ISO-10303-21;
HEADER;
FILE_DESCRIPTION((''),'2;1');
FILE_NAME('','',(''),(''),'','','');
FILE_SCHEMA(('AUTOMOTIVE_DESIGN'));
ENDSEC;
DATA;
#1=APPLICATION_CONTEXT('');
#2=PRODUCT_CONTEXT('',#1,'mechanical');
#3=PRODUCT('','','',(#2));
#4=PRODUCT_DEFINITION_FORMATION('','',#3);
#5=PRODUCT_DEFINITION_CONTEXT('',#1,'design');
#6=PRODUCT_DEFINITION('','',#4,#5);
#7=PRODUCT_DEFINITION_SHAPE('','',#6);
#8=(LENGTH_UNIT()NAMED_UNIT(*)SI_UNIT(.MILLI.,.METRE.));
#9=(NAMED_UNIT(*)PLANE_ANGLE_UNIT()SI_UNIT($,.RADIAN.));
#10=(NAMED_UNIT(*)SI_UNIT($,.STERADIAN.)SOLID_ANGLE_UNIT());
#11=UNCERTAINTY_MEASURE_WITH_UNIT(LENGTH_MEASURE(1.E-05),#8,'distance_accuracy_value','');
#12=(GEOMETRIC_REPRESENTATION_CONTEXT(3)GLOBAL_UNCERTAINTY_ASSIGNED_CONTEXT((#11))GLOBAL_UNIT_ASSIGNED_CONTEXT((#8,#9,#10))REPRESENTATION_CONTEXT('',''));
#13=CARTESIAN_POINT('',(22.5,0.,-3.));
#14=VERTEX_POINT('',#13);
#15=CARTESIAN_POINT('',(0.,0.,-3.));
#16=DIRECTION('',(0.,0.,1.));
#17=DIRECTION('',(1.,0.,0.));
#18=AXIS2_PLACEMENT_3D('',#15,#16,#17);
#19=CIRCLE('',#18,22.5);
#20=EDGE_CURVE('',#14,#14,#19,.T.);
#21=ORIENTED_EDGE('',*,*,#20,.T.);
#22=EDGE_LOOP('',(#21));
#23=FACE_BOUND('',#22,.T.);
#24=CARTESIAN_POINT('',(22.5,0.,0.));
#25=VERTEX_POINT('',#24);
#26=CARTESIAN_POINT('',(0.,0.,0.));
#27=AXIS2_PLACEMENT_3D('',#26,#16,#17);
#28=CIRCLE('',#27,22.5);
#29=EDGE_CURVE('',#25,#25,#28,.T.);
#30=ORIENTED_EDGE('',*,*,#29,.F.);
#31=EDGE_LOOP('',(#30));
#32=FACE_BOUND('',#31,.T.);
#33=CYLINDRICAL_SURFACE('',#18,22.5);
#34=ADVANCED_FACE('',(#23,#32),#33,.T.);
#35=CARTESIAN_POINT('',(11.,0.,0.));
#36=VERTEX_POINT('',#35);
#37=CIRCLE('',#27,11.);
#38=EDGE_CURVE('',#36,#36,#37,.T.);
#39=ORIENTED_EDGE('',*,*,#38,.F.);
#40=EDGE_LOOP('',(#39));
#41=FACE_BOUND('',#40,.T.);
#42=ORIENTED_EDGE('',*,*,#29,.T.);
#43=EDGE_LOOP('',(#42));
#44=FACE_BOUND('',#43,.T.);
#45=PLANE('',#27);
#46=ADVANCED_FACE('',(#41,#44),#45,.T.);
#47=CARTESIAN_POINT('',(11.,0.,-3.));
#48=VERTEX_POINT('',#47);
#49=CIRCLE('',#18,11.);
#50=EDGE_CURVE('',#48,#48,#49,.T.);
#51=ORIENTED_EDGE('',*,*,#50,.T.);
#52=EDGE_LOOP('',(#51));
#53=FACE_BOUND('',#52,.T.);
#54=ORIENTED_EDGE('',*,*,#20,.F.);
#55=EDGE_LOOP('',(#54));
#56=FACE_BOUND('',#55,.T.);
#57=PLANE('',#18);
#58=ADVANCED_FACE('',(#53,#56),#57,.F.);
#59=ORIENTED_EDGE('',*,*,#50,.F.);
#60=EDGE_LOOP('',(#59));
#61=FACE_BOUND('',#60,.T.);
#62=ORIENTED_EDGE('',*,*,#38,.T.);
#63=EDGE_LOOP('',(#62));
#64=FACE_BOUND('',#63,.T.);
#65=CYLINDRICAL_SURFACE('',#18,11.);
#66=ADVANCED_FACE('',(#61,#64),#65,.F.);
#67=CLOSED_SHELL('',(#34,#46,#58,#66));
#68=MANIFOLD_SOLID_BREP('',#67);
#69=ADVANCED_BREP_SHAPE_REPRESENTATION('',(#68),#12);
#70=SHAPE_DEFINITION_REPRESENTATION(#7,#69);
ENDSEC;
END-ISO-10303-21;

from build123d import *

# Parameters (mm, degrees)
SKETCH_1_R             = 22.5
SKETCH_1_R_2           = 11
SM_BASE_FLANGE_1_DEPTH = 3


# Sheet-metal steps are written as plain solids
with BuildPart() as part:
    # Sketch 1 → 基体-法兰1 (new body)
    with BuildSketch(Plane.XY):
        Circle(SKETCH_1_R)
        Circle(SKETCH_1_R_2, mode=Mode.SUBTRACT)
    extrude(amount=-SM_BASE_FLANGE_1_DEPTH)


solid = part.part
